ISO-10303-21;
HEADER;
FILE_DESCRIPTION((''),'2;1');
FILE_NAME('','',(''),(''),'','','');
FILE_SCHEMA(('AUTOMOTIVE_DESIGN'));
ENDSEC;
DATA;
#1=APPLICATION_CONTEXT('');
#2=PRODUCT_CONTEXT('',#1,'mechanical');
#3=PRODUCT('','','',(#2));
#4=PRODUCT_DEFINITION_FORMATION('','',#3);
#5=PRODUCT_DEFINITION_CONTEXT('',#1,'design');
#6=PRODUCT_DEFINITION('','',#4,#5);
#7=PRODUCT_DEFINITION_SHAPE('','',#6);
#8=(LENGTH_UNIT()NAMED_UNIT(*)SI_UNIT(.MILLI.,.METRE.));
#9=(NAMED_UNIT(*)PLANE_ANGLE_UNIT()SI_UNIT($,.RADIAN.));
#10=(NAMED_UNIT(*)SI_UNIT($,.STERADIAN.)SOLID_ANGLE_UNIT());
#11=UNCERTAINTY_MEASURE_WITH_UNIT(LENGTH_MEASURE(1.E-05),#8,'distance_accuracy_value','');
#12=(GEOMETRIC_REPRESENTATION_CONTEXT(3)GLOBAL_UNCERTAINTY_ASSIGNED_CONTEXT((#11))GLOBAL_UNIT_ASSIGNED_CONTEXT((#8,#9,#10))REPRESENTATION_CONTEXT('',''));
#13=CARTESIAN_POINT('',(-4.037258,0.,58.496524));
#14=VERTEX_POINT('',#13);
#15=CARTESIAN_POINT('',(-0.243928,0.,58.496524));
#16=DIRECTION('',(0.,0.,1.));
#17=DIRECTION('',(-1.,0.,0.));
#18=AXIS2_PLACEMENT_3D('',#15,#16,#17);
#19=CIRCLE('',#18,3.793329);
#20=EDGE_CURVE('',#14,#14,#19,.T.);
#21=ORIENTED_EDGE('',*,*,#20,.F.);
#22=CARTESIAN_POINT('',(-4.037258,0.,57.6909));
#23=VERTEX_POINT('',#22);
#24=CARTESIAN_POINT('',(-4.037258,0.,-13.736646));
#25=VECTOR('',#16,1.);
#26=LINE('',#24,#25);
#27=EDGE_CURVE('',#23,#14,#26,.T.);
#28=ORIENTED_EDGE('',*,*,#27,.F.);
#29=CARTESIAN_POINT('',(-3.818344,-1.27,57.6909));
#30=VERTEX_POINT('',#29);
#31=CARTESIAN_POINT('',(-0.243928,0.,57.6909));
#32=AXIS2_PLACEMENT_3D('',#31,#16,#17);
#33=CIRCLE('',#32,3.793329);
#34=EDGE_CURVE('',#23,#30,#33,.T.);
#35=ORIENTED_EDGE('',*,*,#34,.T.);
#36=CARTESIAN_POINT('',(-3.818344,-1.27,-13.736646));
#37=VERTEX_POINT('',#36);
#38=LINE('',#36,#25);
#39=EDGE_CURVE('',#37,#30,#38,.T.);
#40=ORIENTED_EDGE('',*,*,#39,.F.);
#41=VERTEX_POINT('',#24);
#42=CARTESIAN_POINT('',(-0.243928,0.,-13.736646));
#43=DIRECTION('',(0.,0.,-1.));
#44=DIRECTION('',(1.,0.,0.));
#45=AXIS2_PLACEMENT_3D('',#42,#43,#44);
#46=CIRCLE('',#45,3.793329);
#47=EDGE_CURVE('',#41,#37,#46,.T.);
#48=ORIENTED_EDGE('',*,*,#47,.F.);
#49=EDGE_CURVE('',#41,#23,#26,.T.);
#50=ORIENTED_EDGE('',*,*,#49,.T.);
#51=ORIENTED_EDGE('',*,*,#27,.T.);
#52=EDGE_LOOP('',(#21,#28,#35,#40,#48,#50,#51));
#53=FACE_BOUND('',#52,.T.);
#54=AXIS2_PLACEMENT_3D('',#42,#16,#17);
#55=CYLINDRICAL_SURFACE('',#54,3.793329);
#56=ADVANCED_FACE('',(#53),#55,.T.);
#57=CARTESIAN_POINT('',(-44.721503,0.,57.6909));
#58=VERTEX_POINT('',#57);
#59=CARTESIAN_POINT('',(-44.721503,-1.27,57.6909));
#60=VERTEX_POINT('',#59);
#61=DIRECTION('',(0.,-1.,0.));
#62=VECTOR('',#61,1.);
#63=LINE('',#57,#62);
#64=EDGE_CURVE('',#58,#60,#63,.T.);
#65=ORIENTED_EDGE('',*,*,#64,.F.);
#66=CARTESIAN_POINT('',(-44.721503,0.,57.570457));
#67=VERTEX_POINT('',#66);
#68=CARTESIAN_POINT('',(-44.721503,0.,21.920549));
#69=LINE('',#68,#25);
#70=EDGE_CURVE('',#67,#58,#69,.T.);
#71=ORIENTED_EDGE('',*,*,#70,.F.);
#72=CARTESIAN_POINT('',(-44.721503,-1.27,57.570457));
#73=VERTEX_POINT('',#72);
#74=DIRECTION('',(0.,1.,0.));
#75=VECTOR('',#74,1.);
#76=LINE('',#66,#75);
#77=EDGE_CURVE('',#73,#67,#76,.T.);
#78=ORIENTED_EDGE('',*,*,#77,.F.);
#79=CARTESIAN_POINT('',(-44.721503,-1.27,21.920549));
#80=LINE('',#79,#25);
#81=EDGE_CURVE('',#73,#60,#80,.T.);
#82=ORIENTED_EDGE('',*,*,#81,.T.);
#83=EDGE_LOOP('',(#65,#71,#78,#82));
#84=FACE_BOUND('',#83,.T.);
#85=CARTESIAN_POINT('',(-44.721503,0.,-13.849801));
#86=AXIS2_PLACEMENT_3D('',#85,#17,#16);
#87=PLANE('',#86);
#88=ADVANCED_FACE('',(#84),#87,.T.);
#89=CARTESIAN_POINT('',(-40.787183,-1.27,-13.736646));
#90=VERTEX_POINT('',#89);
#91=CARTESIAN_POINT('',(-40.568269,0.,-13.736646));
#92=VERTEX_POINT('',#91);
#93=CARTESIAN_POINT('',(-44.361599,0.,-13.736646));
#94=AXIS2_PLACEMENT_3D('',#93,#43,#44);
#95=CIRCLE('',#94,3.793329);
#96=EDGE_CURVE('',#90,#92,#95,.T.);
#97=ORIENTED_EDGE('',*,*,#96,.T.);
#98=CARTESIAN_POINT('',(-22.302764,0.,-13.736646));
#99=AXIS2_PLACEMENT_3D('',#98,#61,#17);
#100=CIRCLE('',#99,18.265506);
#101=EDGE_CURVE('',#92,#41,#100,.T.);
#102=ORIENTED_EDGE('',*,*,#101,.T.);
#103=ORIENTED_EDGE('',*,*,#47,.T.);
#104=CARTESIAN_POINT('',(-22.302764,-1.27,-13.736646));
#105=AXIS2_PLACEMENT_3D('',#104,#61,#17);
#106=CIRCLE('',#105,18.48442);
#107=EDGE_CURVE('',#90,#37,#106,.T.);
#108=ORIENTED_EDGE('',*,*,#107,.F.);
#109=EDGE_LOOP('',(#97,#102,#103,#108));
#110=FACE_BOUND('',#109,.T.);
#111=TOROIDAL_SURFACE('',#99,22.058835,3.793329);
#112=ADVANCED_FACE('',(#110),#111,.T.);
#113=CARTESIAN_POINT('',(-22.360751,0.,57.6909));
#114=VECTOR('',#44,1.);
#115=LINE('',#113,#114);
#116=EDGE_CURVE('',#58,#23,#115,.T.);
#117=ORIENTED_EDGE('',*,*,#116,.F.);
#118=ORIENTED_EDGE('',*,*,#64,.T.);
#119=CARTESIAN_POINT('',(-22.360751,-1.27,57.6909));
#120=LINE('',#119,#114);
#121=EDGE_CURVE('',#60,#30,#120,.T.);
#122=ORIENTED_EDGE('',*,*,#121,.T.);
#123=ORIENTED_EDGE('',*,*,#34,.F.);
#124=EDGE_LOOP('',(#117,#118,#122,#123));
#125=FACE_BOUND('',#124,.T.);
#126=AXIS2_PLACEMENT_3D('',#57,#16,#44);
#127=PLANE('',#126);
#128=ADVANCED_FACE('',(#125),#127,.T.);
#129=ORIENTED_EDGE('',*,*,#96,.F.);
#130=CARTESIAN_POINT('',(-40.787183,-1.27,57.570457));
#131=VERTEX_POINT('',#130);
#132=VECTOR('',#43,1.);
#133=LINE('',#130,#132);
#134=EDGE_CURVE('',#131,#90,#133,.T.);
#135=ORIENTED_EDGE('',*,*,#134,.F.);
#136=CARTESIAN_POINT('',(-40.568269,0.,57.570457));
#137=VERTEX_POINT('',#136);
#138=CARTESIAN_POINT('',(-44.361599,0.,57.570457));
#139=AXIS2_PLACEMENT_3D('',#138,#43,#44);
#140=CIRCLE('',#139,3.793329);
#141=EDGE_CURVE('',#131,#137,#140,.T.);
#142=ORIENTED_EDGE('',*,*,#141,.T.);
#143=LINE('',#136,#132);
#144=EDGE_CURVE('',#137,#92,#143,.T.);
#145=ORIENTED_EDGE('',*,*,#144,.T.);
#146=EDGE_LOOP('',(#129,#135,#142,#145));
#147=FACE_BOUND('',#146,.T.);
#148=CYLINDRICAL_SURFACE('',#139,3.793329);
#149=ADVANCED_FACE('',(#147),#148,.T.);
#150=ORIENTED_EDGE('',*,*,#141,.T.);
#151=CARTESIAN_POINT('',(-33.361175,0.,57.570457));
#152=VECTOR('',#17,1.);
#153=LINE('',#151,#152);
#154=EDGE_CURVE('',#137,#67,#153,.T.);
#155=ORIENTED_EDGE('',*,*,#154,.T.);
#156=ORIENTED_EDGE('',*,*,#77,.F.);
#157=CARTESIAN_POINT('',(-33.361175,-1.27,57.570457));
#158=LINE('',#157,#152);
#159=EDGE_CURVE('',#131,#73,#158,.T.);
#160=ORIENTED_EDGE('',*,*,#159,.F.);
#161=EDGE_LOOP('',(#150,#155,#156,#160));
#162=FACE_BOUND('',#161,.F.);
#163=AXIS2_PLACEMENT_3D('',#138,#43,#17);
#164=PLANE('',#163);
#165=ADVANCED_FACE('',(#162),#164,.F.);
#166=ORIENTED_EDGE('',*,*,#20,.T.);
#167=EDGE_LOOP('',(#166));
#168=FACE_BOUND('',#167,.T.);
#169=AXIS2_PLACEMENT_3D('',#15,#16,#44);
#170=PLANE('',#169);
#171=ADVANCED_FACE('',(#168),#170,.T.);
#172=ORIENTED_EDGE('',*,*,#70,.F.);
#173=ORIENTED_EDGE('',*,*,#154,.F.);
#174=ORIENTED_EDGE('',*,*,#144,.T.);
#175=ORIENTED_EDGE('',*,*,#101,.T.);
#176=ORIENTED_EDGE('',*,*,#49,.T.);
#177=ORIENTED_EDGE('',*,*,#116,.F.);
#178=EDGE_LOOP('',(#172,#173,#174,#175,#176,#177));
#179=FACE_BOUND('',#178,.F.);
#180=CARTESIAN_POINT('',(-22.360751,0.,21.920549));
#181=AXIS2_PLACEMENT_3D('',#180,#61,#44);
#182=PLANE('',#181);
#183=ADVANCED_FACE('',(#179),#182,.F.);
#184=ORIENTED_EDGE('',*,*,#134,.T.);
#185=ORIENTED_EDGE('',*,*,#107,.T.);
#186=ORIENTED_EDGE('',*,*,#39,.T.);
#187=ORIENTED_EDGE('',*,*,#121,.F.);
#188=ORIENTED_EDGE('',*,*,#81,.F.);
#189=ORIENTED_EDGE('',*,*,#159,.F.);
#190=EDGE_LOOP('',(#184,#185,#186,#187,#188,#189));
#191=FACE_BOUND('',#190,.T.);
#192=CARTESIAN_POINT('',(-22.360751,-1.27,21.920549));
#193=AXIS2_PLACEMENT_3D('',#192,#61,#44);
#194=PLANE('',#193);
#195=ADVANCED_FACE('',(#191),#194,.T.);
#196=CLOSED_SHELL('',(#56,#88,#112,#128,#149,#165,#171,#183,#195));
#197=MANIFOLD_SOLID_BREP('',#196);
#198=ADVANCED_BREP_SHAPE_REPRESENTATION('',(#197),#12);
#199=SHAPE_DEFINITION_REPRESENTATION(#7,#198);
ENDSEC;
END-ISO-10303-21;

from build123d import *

# Parameters (mm, degrees)
F2_R     = 3.7933293271
F4_W     = 44.7215028107
F4_H     = 71.540701203
F5_DEPTH = 1.27


# Not quite as in the source:
# - a feature of the source that left no trace in its solid (it failed there, or was rolled back) is left out


with BuildPart() as f3:
    # F3: sweep along a path in F0
    with BuildLine(Plane.XZ) as f3_path:
        Line((-44.6055270731, 57.5704574585), (-44.6055270731, -13.7366456911))
        ThreePointArc((-44.6055270731, -13.7366456911), (-22.3027635366, -36.0394092277), (0, -13.7366456911))
        Line((0, -13.7366456911), (0, 58.4965236485))
    # F2 (on line) → F3 (sweep)
    with BuildSketch(Plane(origin=(0, 0, 57.5704574585), x_dir=(1, 0, 0), z_dir=(0, 0, -1))):
        with Locations((-44.3615987897, 0)):
            Circle(F2_R)
    sweep(path=f3_path.line)

    # F4 (on Front) → F5 (join)
    with BuildSketch(Plane.XZ):
        with Locations((-22.3607514054, 21.9205492176)):
            Rectangle(F4_W, F4_H)
        with BuildLine():
            Line((0, -13.8498013839), (-44.7215028107, -13.8498013839))
            ThreePointArc((-44.7215028107, -13.8498013839), (-22.3607514054, -36.2105527893), (0, -13.8498013839))
        make_face()
    extrude(amount=F5_DEPTH)


solid = f3.part
